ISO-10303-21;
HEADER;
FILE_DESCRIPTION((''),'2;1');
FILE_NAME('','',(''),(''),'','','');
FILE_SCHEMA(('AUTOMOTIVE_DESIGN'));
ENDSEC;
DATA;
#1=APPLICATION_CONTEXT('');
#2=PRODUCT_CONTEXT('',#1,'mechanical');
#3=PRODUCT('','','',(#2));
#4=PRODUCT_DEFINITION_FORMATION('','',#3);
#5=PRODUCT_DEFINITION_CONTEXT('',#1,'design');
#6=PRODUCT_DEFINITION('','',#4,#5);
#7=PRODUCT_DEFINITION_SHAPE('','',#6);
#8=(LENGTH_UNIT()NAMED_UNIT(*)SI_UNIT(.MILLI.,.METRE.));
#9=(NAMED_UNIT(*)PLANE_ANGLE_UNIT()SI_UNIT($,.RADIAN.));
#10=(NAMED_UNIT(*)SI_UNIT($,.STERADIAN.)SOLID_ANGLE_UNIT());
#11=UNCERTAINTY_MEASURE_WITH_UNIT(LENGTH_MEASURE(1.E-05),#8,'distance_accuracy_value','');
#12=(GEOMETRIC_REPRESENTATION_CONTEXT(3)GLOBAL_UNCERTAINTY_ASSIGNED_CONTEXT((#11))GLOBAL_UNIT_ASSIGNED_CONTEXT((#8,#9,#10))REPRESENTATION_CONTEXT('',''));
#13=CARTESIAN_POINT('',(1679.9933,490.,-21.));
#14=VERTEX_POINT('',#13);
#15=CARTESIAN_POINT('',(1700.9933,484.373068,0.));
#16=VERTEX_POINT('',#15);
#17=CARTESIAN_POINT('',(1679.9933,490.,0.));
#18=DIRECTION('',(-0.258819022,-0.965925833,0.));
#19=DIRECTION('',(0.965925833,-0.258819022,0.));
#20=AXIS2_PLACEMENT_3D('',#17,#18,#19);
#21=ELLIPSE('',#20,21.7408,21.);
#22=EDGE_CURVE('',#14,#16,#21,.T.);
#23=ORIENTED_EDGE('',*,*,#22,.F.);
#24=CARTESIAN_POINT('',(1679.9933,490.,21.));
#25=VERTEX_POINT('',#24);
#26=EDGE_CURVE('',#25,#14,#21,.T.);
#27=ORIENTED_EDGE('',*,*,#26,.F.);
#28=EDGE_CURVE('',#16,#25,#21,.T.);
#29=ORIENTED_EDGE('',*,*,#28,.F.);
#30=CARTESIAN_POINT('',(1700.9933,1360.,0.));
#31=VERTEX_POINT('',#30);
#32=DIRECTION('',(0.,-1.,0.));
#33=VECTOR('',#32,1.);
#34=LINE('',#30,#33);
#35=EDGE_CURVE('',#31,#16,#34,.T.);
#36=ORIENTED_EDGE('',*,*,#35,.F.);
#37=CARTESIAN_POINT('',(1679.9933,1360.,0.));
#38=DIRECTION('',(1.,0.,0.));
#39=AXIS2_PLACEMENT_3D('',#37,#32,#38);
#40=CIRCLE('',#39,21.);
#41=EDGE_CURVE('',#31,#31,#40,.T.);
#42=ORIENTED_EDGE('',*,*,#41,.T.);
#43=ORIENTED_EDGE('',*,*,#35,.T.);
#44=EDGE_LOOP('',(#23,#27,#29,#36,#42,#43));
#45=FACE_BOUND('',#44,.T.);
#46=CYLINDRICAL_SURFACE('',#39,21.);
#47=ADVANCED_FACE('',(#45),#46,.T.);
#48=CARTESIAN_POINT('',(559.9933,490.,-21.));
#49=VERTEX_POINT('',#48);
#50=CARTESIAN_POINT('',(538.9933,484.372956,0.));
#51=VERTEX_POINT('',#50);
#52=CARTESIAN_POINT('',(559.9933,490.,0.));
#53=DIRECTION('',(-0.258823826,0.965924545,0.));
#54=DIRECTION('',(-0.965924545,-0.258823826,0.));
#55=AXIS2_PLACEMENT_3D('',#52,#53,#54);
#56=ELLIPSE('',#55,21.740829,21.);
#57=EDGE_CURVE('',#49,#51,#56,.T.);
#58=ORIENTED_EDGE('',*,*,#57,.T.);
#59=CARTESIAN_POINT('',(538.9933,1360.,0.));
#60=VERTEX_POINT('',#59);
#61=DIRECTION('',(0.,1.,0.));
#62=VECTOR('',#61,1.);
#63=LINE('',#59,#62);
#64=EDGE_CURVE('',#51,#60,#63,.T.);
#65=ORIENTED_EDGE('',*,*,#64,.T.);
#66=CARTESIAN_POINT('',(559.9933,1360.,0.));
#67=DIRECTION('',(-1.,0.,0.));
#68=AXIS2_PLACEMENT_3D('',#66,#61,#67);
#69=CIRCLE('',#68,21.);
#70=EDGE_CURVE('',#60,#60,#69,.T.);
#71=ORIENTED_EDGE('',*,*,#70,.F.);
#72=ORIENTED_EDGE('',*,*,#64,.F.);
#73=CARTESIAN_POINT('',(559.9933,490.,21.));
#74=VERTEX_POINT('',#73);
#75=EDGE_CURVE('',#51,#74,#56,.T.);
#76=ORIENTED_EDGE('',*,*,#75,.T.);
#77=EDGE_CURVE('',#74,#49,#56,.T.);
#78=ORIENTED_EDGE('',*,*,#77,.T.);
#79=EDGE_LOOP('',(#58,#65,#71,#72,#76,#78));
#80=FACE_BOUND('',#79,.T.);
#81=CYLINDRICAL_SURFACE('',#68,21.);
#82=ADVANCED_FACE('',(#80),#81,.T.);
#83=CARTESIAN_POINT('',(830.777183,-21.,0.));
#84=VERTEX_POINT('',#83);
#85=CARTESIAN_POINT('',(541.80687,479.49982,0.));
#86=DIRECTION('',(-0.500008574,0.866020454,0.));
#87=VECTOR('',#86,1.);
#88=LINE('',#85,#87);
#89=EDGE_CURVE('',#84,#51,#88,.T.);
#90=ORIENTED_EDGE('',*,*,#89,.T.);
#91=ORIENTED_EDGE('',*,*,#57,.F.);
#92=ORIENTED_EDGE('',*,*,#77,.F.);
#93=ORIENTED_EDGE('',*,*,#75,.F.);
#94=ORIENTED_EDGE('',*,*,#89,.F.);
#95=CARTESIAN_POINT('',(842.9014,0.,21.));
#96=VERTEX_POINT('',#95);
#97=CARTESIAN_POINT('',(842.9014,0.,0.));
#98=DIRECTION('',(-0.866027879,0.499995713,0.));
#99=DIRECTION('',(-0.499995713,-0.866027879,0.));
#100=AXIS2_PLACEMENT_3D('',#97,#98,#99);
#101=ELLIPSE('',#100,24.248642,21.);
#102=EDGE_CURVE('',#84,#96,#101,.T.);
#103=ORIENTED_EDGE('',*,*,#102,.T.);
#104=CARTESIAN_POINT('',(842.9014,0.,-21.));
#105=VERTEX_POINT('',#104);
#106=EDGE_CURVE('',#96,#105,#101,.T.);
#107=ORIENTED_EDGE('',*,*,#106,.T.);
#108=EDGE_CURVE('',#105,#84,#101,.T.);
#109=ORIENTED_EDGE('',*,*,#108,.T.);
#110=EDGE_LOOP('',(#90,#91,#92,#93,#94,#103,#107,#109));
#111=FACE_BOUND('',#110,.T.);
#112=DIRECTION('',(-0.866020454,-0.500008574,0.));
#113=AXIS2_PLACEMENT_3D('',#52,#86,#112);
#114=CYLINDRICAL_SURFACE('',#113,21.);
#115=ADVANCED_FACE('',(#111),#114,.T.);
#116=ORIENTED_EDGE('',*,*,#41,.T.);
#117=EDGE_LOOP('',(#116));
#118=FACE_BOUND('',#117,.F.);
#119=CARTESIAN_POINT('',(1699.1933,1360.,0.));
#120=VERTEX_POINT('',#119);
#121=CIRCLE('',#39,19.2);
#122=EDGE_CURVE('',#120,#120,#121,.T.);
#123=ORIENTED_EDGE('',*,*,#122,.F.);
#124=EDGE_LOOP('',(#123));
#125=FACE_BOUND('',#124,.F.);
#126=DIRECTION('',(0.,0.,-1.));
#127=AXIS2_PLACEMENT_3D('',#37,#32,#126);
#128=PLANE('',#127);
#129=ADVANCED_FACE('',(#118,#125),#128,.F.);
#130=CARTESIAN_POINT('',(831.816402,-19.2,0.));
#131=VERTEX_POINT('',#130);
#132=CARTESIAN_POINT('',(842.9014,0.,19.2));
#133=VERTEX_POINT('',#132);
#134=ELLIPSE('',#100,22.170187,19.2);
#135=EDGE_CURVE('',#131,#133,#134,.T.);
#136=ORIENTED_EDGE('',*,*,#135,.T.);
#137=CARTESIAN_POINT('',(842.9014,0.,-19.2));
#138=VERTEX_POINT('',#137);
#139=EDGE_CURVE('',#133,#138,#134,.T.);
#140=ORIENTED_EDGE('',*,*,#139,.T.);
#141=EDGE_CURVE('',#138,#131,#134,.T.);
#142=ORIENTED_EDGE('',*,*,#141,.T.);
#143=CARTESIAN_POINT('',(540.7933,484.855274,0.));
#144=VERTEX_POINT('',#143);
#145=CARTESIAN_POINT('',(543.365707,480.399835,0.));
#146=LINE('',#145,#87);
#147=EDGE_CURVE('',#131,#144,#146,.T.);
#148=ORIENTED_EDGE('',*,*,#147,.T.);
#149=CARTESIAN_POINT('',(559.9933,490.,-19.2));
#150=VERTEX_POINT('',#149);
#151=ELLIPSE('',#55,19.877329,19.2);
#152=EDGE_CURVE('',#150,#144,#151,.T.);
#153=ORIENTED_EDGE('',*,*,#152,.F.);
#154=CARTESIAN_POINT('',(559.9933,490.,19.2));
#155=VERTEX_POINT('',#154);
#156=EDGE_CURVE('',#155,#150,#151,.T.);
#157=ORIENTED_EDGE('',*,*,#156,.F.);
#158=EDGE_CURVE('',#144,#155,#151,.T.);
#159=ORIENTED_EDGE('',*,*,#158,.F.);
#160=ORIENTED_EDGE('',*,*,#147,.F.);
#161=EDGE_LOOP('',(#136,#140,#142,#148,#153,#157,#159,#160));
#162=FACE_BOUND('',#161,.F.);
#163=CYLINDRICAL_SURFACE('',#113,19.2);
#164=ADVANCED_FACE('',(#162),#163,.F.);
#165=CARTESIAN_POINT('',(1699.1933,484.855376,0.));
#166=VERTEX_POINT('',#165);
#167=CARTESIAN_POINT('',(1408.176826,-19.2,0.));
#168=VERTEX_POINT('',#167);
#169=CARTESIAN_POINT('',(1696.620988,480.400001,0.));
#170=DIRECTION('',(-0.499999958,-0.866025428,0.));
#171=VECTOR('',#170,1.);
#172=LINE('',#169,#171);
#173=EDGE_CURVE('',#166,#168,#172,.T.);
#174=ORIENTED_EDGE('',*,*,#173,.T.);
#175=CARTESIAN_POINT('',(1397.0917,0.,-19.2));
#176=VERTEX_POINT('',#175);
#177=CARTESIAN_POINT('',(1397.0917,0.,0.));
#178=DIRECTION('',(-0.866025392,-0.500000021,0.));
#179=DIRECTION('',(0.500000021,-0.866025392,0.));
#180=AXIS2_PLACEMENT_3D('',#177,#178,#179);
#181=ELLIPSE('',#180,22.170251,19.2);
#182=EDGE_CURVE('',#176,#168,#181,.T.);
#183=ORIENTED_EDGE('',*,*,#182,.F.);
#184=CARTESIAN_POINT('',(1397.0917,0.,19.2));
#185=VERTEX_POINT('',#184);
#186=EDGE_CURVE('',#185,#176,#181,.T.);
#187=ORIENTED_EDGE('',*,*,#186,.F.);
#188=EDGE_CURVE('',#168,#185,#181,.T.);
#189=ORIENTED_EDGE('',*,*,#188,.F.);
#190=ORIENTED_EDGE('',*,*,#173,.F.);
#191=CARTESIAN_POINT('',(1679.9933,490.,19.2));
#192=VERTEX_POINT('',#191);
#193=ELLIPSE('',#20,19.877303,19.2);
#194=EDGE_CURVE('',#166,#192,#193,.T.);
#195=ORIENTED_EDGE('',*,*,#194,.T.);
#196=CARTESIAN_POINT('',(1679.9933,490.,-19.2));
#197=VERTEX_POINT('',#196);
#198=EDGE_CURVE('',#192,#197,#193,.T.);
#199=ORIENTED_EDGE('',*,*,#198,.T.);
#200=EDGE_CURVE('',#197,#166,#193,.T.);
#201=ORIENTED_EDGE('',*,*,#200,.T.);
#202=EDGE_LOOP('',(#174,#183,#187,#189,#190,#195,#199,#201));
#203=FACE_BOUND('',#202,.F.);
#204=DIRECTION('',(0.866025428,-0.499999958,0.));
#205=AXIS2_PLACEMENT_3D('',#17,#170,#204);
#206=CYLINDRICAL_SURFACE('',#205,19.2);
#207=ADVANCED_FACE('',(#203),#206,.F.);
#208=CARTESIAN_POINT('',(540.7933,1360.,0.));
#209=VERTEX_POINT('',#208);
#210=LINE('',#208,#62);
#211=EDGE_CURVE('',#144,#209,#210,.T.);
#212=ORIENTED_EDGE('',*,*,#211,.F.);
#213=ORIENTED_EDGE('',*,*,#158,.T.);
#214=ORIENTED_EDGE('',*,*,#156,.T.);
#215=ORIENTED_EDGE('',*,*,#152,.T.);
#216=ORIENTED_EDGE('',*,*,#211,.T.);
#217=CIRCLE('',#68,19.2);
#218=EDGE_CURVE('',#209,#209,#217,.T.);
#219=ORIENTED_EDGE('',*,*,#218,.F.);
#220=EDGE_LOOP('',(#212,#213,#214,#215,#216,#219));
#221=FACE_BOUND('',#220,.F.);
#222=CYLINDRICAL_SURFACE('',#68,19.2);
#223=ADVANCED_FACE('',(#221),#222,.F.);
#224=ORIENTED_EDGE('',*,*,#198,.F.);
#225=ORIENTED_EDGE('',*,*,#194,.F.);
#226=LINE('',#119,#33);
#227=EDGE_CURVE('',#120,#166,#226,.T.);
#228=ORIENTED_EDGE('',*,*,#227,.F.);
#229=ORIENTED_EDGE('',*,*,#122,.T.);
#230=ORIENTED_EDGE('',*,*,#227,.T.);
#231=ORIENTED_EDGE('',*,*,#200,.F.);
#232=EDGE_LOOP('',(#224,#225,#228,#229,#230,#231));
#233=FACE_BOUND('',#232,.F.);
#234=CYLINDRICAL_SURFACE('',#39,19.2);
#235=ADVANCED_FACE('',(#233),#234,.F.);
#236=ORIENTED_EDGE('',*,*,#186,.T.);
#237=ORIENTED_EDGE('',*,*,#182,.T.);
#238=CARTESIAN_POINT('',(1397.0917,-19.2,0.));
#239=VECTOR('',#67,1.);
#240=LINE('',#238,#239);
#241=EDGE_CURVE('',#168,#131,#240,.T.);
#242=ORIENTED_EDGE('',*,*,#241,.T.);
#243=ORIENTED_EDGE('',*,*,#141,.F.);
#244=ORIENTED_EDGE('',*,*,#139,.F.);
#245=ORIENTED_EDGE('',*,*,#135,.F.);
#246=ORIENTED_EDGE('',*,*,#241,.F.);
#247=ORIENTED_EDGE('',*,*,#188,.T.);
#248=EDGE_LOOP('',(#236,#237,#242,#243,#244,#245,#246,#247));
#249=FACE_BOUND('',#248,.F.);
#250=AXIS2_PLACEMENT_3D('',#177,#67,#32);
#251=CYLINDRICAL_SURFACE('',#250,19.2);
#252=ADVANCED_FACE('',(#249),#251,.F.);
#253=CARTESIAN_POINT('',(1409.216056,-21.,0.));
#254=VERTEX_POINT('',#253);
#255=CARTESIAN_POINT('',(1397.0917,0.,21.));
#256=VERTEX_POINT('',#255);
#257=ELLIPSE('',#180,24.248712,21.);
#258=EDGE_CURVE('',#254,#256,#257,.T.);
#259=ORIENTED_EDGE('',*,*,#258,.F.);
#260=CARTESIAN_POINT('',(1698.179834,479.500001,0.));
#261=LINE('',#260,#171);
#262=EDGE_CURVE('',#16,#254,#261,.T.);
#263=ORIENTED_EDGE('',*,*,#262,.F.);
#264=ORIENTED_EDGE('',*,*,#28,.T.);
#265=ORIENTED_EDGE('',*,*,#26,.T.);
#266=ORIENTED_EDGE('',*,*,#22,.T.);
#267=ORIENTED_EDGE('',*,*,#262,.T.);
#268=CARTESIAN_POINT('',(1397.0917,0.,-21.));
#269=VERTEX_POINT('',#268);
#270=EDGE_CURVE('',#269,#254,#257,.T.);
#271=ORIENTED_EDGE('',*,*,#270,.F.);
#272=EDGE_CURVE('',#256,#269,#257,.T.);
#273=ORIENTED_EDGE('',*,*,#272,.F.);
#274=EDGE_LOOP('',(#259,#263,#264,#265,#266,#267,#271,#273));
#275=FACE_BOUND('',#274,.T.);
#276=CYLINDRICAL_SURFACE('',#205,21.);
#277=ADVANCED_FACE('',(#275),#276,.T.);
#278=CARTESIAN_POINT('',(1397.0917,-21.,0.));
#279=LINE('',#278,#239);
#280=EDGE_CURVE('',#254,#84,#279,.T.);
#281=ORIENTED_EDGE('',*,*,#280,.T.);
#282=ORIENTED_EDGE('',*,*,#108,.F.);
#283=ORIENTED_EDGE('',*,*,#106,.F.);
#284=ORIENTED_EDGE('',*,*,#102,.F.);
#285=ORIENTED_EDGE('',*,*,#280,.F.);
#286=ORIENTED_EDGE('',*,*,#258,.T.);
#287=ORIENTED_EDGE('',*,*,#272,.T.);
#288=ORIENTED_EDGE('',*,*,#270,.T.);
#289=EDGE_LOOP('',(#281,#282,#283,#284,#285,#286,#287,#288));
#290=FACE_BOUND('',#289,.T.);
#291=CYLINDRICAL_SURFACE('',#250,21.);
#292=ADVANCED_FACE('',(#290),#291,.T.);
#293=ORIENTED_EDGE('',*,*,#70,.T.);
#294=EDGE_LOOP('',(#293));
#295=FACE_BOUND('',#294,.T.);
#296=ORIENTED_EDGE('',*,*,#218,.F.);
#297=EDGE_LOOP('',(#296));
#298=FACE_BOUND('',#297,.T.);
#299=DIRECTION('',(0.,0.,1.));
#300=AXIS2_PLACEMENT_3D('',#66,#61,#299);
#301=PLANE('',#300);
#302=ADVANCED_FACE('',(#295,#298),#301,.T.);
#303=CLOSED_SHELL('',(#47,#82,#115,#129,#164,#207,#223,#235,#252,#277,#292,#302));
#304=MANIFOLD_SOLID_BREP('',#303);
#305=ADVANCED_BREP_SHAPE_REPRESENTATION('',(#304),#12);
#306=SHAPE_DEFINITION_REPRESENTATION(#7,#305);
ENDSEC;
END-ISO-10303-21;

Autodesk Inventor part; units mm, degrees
ref_plane "YZ Plane" through (0, 0, 0) normal (1, 0, 0) x (0, 1, 0)
ref_plane "XZ Plane" through (0, 0, 0) normal (0, 1, 0) x (-1, 0, 0)
sketch "Boceto1" plane through (0, 0, 0) normal (0, 0, 1) x (1, 0, 0)
  line L0 (-332.0752, 0) -> (-331.8519, -0.5171)
  line L1 (560.0067, 1140) -> (559.9933, 1139.483)
  line L2 (332.0752, 0) -> (331.8519, -0.5171)
  line L3 (559.9933, 488.7901) -> (559.9933, 1360)
  line L4 (559.9933, 1360) -> (565.6963, 1360)
  line L5 (1679.9933, 1360) -> (1679.9933, 490)
  line L6 (1397.0917, 0) -> (842.9014, 0)
  line L7 (559.9933, 490) -> (559.9933, 1360)
  line L8 (-277.7918, 0) -> (-277.7902, -0.0027)
  line L9 (1679.9933, 1360) -> (1679.9933, 1303.9992)
  line L10 (1679.9933, 1360) -> (1679.9933, 490)
  line L11 (1679.9933, 490) -> (1397.0917, 0)
  line L12 (559.9933, 1360) -> (559.9933, 490)
  line L13 (559.9933, 490) -> (842.9014, 0)
  point P0 (0, 0)
  point P1 (0, -20)
  point P2 (277.7902, 0)
ref_plane "Plano de trabajo6" through (1679.9933, 1360, 0) normal (0, -1, 0) x (1, 0, 0)
sketch "Boceto7" plane through (1679.9933, 1360, 0) normal (0, -1, 0) x (1, 0, 0)
  circle A0 centre (0, 0) radius 21
  circle A1 centre (0, 0) radius 19.2
  point P0 (-1679.9933, 0)
  dimension "d32" = 42
  dimension "d33" = 38.4
sweep "Barrido3" add profiles "Boceto7" path "Boceto1" path curves L5 L11 L6 L13 L12
properties part number "barra_palanca" material "Acero, carbono"
